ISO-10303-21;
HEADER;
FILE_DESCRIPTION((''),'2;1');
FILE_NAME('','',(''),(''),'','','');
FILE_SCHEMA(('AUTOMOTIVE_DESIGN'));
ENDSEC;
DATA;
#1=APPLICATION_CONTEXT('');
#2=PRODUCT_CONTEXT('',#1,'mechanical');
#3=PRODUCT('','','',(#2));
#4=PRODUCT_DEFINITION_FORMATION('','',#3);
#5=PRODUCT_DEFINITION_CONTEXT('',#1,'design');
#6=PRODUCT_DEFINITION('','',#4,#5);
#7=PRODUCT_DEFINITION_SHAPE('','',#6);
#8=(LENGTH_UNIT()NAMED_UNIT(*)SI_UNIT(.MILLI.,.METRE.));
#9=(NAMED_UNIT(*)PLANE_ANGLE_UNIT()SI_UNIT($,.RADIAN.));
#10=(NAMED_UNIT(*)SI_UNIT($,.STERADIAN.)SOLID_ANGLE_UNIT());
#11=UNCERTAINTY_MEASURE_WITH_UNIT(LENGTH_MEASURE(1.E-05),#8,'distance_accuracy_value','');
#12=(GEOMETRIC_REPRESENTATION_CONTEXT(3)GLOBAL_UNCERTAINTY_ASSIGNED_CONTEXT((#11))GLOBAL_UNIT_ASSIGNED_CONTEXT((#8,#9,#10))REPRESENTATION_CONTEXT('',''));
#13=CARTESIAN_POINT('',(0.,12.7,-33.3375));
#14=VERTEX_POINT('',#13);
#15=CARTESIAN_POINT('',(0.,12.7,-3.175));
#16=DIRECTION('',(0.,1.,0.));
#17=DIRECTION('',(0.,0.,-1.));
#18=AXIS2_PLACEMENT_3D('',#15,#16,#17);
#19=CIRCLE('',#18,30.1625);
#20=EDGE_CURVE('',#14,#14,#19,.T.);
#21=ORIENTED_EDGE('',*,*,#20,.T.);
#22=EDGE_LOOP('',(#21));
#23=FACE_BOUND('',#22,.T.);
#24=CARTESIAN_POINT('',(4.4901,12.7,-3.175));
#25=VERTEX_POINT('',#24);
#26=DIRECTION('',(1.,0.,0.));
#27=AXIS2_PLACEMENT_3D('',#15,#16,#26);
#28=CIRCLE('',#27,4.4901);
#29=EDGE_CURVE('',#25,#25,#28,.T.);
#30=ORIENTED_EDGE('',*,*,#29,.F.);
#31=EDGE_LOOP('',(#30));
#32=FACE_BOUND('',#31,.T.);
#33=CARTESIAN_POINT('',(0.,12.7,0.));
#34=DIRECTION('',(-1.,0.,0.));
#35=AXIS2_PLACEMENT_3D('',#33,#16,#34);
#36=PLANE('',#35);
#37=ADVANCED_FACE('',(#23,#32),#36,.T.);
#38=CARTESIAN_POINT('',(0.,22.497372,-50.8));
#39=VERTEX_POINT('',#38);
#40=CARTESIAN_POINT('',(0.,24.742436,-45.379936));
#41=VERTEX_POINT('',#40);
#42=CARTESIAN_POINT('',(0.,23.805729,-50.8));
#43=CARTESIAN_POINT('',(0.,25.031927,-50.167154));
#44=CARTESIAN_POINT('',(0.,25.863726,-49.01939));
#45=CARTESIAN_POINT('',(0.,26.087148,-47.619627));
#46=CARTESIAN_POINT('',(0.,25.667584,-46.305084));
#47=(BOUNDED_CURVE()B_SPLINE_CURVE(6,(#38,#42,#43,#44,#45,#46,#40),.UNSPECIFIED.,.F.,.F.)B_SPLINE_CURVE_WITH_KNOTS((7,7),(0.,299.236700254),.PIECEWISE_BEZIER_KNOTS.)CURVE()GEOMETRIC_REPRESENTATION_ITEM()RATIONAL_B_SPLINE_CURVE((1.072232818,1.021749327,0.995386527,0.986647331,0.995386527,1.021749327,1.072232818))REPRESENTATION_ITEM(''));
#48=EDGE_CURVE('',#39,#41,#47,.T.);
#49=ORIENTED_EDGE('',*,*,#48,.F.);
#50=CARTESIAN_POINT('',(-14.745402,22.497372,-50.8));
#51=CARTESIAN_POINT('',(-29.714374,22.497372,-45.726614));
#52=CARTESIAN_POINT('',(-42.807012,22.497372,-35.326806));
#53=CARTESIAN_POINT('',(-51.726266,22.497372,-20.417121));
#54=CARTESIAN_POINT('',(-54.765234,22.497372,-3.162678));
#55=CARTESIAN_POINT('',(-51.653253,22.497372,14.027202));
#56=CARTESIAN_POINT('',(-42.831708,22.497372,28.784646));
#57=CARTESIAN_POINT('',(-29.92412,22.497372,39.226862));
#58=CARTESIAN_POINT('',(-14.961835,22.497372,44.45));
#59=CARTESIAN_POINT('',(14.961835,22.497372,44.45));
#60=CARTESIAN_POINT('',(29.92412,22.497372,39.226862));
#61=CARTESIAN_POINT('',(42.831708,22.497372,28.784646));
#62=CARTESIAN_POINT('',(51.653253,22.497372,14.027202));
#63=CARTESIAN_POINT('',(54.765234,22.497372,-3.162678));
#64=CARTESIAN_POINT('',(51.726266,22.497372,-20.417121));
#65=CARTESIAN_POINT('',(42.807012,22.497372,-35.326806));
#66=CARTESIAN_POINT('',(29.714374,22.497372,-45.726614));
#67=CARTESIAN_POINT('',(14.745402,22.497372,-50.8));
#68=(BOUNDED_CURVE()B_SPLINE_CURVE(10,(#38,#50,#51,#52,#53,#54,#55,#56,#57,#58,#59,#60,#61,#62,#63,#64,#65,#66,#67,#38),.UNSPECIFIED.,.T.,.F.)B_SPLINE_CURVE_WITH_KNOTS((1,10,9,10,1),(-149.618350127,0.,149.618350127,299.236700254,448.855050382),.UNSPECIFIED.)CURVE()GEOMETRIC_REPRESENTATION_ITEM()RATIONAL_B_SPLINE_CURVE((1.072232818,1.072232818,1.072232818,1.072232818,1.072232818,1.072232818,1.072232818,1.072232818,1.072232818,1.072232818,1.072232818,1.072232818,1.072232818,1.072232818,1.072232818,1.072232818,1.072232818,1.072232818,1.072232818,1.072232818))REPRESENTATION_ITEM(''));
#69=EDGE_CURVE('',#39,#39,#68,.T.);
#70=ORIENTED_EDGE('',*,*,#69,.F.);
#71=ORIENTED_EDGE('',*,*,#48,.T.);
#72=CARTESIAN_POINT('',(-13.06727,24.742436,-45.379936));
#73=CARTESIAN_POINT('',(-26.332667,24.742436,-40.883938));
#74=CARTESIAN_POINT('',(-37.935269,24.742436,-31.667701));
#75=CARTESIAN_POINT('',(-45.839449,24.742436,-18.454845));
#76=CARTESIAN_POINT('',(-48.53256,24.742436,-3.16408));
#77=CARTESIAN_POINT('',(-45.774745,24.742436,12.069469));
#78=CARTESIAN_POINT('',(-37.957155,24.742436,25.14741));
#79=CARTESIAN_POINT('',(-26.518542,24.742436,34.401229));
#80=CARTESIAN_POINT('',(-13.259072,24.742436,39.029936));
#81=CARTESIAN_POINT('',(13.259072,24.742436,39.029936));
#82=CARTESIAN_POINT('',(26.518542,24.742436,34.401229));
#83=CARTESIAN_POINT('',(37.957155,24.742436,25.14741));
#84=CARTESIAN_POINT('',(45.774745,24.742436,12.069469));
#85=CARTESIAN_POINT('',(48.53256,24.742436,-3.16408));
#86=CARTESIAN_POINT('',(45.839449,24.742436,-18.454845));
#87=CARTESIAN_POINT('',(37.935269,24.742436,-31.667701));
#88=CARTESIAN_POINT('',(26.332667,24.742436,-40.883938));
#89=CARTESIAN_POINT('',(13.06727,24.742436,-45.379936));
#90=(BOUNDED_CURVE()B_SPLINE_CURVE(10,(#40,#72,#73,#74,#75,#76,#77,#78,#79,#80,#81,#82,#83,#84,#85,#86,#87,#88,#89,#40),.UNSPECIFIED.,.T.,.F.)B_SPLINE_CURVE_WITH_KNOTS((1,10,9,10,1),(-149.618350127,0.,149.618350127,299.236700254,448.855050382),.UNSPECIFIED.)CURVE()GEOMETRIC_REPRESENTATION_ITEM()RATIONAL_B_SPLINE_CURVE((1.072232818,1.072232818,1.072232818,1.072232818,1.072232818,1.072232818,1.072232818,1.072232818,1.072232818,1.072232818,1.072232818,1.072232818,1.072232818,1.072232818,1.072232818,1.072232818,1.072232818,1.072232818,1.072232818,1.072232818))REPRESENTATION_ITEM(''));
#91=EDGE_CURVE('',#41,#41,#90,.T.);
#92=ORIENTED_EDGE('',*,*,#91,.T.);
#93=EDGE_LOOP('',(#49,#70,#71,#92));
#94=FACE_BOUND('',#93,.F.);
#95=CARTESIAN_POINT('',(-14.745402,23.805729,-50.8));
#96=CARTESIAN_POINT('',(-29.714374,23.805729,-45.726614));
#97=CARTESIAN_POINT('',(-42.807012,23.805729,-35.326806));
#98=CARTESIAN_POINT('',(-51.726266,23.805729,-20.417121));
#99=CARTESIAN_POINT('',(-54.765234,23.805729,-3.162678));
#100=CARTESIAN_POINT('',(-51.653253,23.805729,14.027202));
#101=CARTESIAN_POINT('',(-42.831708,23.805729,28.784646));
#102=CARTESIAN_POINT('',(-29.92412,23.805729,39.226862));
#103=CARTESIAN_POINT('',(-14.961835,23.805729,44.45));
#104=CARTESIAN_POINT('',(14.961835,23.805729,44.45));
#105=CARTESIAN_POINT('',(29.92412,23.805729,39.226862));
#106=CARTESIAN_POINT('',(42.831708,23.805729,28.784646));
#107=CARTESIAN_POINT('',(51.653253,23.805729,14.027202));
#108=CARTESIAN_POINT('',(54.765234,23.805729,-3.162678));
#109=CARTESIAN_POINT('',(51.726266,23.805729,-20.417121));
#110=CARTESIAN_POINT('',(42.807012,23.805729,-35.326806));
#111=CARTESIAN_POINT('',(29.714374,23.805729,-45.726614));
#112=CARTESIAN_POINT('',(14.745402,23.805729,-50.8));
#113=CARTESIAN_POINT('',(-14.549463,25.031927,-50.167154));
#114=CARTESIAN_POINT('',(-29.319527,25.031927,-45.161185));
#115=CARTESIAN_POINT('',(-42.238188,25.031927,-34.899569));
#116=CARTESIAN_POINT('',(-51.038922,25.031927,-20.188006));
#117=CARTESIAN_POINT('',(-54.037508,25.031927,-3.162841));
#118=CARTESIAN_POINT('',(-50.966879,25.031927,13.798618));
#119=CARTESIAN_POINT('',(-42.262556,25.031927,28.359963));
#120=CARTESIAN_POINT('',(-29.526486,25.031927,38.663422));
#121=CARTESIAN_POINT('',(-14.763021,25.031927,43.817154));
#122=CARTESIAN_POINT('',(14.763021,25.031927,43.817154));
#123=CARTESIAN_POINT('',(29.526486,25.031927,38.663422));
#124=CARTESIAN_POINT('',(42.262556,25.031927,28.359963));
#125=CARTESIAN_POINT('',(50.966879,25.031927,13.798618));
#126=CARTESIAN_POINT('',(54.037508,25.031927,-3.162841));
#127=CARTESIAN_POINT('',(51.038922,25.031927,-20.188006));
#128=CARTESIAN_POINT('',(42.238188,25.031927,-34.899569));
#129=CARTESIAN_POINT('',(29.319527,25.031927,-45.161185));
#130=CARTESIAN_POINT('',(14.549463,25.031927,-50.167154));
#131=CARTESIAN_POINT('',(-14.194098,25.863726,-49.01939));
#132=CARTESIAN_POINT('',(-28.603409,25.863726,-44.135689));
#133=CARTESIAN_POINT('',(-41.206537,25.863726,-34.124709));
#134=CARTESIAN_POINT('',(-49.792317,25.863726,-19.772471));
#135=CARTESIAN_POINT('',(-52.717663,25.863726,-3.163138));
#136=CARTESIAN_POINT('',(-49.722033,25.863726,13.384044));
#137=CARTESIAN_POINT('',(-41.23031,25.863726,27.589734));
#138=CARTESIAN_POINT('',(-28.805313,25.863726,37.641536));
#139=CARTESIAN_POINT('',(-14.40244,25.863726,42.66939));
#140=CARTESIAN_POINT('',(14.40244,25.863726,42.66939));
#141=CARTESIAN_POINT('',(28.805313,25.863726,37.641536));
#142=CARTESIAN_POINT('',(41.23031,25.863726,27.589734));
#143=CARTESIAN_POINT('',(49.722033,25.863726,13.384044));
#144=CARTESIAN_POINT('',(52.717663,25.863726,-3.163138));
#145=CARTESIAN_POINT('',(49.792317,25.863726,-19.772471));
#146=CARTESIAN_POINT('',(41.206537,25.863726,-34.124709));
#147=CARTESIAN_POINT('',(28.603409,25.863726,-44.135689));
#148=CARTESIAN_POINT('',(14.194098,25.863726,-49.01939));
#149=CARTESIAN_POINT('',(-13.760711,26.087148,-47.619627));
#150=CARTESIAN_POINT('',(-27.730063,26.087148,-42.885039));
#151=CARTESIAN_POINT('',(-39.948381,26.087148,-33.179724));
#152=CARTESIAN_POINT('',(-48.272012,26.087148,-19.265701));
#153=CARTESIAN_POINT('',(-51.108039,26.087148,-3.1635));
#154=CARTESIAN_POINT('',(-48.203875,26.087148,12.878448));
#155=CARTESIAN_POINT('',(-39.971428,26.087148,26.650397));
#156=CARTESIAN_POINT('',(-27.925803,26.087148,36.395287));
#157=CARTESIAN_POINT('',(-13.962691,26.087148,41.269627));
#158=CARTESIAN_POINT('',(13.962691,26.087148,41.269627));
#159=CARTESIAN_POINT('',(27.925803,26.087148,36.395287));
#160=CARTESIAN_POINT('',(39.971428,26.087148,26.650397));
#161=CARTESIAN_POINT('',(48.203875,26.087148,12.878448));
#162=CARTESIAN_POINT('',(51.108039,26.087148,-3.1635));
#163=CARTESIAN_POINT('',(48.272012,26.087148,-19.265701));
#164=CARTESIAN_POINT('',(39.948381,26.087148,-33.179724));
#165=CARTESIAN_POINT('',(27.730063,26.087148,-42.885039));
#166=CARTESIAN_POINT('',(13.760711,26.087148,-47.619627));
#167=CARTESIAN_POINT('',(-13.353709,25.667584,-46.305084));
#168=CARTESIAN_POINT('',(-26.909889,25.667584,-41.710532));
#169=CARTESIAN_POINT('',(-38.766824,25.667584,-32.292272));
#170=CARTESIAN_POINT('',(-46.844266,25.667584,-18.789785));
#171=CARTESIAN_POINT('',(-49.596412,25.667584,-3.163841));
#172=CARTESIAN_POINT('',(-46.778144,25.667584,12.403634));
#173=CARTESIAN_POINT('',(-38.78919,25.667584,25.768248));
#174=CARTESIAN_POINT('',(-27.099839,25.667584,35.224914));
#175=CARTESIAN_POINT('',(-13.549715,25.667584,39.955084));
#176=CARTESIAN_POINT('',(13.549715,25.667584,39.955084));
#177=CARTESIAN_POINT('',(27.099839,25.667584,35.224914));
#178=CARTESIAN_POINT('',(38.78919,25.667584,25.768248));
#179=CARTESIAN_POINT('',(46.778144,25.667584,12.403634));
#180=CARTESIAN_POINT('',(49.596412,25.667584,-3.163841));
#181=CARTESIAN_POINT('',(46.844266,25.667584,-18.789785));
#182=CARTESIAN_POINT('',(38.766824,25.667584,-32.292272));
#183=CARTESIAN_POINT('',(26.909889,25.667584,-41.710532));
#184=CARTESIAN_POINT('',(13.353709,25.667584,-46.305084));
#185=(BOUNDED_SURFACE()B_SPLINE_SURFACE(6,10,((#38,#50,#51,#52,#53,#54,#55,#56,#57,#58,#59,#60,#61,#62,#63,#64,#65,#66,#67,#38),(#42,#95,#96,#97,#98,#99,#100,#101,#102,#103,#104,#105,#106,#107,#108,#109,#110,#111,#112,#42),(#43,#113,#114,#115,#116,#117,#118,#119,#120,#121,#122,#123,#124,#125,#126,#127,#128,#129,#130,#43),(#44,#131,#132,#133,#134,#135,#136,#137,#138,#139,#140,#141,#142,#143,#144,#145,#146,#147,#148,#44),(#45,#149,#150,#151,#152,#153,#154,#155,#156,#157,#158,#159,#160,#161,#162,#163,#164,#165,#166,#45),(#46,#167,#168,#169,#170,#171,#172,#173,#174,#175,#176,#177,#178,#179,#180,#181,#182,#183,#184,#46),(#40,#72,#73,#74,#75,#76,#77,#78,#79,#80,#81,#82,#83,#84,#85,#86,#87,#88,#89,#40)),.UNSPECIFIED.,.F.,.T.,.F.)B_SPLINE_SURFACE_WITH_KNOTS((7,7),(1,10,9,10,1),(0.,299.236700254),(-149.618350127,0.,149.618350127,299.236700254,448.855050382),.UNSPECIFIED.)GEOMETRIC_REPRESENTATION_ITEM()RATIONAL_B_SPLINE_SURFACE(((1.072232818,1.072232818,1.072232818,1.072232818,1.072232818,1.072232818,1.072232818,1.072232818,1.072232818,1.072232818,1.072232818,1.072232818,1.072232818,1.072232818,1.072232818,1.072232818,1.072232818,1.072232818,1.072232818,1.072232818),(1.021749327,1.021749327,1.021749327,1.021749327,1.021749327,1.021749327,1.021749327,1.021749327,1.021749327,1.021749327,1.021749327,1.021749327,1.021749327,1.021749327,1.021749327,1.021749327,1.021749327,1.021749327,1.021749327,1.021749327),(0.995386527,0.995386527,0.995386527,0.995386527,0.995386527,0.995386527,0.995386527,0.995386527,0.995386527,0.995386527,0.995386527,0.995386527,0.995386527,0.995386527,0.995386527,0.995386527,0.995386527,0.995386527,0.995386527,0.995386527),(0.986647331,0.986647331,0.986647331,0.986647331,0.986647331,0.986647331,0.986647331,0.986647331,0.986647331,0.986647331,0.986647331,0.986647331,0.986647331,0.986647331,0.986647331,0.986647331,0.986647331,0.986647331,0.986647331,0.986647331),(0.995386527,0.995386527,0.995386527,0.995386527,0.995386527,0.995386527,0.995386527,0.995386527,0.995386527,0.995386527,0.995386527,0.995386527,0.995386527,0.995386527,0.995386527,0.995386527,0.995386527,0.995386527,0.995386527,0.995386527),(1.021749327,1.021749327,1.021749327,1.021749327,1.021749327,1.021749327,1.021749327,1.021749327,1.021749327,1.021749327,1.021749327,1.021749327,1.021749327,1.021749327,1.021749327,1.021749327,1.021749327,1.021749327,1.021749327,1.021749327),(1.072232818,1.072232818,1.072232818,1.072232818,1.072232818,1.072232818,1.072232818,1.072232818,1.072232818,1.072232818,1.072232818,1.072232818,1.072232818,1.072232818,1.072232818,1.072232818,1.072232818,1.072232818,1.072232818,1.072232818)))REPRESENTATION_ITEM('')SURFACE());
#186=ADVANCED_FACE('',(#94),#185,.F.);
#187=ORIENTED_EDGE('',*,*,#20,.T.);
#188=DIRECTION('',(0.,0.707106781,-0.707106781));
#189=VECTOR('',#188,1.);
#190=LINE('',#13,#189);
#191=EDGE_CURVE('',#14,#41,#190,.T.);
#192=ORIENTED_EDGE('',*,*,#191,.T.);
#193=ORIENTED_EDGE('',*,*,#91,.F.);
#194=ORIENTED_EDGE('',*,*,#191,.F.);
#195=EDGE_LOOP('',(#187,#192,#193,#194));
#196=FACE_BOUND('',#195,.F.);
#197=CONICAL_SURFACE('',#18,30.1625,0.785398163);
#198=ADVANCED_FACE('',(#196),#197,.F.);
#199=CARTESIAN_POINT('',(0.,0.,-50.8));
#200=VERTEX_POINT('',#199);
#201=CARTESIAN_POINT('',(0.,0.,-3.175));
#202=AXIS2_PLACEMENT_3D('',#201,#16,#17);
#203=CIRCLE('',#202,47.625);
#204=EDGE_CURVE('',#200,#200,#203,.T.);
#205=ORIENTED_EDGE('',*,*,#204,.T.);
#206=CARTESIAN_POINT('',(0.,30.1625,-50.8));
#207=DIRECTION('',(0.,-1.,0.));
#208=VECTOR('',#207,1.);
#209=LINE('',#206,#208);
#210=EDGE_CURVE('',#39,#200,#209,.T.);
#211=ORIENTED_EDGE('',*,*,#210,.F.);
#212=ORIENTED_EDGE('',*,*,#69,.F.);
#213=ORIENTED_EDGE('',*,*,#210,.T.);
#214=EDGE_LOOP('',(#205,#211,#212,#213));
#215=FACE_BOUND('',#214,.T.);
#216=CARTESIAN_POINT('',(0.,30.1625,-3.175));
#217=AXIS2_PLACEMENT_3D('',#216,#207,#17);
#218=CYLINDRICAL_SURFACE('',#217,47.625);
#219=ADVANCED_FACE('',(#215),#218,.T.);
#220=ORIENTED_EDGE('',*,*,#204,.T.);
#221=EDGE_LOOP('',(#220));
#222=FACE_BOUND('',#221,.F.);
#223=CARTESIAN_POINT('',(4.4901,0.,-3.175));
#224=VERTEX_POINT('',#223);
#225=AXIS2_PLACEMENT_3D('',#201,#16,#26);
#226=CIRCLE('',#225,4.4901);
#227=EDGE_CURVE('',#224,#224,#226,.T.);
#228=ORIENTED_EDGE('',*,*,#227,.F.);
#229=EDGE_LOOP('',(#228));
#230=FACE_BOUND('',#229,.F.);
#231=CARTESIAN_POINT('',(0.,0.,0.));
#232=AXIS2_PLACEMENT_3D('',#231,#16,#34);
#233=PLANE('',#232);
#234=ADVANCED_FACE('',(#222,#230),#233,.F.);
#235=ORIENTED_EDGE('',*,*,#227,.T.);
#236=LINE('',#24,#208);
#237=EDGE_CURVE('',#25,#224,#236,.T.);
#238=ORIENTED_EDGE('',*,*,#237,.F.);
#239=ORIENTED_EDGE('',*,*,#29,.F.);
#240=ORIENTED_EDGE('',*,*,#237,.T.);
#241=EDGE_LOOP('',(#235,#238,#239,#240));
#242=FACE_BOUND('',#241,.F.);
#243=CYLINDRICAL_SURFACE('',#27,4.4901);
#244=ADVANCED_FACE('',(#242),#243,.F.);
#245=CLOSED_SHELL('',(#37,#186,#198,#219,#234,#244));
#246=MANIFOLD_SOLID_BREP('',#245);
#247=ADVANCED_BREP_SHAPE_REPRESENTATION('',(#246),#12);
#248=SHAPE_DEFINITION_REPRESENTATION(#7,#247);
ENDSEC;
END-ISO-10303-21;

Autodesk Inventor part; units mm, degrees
ref_plane "YZ Plane" through (0, 0, 0) normal (1, 0, 0) x (0, 1, 0)
ref_plane "XZ Plane" through (0, 0, 0) normal (0, 1, 0) x (-1, 0, 0)
ref_plane "XY Plane" through (0, 0, 0) normal (0, 0, 1) x (1, 0, 0)
sketch "Sketch1" plane through (0, 0, 0) normal (0, 1, 0) x (-1, 0, 0)
  circle A0 centre (0, 0) radius 33.3375
  dimension "d0" = 66.675
extrude "Extrusion1" add sketch "Sketch1" along normal blind 12.7
sketch "Sketch2" plane through (0, 12.7, 0) normal (0, 1, 0) x (1, 0, 0)
  line L0 (0, 0) -> (-3.175, 0)
  line L1 (-3.175, 0) -> (-3.175, 3.175)
  line L2 (-3.175, 3.175) -> (0, 3.175)
  line L3 (0, 3.175) -> (0, 0)
  dimension "d3" = 3.175
  dimension "d4" = 3.175
extrude "Extrusion2" cut sketch "Sketch2" against normal blind 12.7
sketch "Sketch3" plane through (0, 12.7, -3.175) normal (-1, 0, 0) x (0, 0, 1)
  line L0 (36.5125, 0) -> (-30.1625, 0) projected
  line L1 (36.5125, -12.7) -> (-30.1625, -12.7) projected
  line L2 (0, 0) -> (0, -12.7) projected
  line L3 (3.175, 0) -> (3.175, -12.7) projected
  line L4 (3.175, 0) -> (-47.625, 0)
  line L5 (-30.1625, 0) -> (-47.625, 17.4625)
  line L6 (-30.1625, 0) -> (-5.4668, 0) construction
  line L7 (-47.625, 17.4625) -> (-47.625, -12.7)
  line L8 (36.5125, 0) -> (-30.1625, 0) projected
  line L9 (-47.625, -12.7) -> (-30.1625, -12.7)
  line L10 (-30.1625, 0) -> (-30.1625, -12.7)
  line L11 (-30.1625, -12.7) -> (-30.1625, 0) projected
  line L12 (0, 0) -> (0, 32.402)
  dimension "d8" = 50.8
  dimension "d9" = 135
revolve "Revolution1" add sketch "Sketch3" angle 360 about axis through (0, 12.7, -3.175) along (0, 1, 0) contours L10 L9 L7 L4 | L4 L7 L5
fillet "Fillet1" radius 3.175 1 edges at (0, 30.1625, 44.45)
sketch "Sketch4" plane through (0, 12.7, -3.175) normal (0, 1, 0) x (1, 0, 0)
  line L0 (0, 0) -> (-3.175, 0) projected
  circle A0 centre (0, 0) radius 4.4901
  point P0 (0, -3.175)
extrude "Extrusion3" cut sketch "Sketch4" against normal blind 12.7
